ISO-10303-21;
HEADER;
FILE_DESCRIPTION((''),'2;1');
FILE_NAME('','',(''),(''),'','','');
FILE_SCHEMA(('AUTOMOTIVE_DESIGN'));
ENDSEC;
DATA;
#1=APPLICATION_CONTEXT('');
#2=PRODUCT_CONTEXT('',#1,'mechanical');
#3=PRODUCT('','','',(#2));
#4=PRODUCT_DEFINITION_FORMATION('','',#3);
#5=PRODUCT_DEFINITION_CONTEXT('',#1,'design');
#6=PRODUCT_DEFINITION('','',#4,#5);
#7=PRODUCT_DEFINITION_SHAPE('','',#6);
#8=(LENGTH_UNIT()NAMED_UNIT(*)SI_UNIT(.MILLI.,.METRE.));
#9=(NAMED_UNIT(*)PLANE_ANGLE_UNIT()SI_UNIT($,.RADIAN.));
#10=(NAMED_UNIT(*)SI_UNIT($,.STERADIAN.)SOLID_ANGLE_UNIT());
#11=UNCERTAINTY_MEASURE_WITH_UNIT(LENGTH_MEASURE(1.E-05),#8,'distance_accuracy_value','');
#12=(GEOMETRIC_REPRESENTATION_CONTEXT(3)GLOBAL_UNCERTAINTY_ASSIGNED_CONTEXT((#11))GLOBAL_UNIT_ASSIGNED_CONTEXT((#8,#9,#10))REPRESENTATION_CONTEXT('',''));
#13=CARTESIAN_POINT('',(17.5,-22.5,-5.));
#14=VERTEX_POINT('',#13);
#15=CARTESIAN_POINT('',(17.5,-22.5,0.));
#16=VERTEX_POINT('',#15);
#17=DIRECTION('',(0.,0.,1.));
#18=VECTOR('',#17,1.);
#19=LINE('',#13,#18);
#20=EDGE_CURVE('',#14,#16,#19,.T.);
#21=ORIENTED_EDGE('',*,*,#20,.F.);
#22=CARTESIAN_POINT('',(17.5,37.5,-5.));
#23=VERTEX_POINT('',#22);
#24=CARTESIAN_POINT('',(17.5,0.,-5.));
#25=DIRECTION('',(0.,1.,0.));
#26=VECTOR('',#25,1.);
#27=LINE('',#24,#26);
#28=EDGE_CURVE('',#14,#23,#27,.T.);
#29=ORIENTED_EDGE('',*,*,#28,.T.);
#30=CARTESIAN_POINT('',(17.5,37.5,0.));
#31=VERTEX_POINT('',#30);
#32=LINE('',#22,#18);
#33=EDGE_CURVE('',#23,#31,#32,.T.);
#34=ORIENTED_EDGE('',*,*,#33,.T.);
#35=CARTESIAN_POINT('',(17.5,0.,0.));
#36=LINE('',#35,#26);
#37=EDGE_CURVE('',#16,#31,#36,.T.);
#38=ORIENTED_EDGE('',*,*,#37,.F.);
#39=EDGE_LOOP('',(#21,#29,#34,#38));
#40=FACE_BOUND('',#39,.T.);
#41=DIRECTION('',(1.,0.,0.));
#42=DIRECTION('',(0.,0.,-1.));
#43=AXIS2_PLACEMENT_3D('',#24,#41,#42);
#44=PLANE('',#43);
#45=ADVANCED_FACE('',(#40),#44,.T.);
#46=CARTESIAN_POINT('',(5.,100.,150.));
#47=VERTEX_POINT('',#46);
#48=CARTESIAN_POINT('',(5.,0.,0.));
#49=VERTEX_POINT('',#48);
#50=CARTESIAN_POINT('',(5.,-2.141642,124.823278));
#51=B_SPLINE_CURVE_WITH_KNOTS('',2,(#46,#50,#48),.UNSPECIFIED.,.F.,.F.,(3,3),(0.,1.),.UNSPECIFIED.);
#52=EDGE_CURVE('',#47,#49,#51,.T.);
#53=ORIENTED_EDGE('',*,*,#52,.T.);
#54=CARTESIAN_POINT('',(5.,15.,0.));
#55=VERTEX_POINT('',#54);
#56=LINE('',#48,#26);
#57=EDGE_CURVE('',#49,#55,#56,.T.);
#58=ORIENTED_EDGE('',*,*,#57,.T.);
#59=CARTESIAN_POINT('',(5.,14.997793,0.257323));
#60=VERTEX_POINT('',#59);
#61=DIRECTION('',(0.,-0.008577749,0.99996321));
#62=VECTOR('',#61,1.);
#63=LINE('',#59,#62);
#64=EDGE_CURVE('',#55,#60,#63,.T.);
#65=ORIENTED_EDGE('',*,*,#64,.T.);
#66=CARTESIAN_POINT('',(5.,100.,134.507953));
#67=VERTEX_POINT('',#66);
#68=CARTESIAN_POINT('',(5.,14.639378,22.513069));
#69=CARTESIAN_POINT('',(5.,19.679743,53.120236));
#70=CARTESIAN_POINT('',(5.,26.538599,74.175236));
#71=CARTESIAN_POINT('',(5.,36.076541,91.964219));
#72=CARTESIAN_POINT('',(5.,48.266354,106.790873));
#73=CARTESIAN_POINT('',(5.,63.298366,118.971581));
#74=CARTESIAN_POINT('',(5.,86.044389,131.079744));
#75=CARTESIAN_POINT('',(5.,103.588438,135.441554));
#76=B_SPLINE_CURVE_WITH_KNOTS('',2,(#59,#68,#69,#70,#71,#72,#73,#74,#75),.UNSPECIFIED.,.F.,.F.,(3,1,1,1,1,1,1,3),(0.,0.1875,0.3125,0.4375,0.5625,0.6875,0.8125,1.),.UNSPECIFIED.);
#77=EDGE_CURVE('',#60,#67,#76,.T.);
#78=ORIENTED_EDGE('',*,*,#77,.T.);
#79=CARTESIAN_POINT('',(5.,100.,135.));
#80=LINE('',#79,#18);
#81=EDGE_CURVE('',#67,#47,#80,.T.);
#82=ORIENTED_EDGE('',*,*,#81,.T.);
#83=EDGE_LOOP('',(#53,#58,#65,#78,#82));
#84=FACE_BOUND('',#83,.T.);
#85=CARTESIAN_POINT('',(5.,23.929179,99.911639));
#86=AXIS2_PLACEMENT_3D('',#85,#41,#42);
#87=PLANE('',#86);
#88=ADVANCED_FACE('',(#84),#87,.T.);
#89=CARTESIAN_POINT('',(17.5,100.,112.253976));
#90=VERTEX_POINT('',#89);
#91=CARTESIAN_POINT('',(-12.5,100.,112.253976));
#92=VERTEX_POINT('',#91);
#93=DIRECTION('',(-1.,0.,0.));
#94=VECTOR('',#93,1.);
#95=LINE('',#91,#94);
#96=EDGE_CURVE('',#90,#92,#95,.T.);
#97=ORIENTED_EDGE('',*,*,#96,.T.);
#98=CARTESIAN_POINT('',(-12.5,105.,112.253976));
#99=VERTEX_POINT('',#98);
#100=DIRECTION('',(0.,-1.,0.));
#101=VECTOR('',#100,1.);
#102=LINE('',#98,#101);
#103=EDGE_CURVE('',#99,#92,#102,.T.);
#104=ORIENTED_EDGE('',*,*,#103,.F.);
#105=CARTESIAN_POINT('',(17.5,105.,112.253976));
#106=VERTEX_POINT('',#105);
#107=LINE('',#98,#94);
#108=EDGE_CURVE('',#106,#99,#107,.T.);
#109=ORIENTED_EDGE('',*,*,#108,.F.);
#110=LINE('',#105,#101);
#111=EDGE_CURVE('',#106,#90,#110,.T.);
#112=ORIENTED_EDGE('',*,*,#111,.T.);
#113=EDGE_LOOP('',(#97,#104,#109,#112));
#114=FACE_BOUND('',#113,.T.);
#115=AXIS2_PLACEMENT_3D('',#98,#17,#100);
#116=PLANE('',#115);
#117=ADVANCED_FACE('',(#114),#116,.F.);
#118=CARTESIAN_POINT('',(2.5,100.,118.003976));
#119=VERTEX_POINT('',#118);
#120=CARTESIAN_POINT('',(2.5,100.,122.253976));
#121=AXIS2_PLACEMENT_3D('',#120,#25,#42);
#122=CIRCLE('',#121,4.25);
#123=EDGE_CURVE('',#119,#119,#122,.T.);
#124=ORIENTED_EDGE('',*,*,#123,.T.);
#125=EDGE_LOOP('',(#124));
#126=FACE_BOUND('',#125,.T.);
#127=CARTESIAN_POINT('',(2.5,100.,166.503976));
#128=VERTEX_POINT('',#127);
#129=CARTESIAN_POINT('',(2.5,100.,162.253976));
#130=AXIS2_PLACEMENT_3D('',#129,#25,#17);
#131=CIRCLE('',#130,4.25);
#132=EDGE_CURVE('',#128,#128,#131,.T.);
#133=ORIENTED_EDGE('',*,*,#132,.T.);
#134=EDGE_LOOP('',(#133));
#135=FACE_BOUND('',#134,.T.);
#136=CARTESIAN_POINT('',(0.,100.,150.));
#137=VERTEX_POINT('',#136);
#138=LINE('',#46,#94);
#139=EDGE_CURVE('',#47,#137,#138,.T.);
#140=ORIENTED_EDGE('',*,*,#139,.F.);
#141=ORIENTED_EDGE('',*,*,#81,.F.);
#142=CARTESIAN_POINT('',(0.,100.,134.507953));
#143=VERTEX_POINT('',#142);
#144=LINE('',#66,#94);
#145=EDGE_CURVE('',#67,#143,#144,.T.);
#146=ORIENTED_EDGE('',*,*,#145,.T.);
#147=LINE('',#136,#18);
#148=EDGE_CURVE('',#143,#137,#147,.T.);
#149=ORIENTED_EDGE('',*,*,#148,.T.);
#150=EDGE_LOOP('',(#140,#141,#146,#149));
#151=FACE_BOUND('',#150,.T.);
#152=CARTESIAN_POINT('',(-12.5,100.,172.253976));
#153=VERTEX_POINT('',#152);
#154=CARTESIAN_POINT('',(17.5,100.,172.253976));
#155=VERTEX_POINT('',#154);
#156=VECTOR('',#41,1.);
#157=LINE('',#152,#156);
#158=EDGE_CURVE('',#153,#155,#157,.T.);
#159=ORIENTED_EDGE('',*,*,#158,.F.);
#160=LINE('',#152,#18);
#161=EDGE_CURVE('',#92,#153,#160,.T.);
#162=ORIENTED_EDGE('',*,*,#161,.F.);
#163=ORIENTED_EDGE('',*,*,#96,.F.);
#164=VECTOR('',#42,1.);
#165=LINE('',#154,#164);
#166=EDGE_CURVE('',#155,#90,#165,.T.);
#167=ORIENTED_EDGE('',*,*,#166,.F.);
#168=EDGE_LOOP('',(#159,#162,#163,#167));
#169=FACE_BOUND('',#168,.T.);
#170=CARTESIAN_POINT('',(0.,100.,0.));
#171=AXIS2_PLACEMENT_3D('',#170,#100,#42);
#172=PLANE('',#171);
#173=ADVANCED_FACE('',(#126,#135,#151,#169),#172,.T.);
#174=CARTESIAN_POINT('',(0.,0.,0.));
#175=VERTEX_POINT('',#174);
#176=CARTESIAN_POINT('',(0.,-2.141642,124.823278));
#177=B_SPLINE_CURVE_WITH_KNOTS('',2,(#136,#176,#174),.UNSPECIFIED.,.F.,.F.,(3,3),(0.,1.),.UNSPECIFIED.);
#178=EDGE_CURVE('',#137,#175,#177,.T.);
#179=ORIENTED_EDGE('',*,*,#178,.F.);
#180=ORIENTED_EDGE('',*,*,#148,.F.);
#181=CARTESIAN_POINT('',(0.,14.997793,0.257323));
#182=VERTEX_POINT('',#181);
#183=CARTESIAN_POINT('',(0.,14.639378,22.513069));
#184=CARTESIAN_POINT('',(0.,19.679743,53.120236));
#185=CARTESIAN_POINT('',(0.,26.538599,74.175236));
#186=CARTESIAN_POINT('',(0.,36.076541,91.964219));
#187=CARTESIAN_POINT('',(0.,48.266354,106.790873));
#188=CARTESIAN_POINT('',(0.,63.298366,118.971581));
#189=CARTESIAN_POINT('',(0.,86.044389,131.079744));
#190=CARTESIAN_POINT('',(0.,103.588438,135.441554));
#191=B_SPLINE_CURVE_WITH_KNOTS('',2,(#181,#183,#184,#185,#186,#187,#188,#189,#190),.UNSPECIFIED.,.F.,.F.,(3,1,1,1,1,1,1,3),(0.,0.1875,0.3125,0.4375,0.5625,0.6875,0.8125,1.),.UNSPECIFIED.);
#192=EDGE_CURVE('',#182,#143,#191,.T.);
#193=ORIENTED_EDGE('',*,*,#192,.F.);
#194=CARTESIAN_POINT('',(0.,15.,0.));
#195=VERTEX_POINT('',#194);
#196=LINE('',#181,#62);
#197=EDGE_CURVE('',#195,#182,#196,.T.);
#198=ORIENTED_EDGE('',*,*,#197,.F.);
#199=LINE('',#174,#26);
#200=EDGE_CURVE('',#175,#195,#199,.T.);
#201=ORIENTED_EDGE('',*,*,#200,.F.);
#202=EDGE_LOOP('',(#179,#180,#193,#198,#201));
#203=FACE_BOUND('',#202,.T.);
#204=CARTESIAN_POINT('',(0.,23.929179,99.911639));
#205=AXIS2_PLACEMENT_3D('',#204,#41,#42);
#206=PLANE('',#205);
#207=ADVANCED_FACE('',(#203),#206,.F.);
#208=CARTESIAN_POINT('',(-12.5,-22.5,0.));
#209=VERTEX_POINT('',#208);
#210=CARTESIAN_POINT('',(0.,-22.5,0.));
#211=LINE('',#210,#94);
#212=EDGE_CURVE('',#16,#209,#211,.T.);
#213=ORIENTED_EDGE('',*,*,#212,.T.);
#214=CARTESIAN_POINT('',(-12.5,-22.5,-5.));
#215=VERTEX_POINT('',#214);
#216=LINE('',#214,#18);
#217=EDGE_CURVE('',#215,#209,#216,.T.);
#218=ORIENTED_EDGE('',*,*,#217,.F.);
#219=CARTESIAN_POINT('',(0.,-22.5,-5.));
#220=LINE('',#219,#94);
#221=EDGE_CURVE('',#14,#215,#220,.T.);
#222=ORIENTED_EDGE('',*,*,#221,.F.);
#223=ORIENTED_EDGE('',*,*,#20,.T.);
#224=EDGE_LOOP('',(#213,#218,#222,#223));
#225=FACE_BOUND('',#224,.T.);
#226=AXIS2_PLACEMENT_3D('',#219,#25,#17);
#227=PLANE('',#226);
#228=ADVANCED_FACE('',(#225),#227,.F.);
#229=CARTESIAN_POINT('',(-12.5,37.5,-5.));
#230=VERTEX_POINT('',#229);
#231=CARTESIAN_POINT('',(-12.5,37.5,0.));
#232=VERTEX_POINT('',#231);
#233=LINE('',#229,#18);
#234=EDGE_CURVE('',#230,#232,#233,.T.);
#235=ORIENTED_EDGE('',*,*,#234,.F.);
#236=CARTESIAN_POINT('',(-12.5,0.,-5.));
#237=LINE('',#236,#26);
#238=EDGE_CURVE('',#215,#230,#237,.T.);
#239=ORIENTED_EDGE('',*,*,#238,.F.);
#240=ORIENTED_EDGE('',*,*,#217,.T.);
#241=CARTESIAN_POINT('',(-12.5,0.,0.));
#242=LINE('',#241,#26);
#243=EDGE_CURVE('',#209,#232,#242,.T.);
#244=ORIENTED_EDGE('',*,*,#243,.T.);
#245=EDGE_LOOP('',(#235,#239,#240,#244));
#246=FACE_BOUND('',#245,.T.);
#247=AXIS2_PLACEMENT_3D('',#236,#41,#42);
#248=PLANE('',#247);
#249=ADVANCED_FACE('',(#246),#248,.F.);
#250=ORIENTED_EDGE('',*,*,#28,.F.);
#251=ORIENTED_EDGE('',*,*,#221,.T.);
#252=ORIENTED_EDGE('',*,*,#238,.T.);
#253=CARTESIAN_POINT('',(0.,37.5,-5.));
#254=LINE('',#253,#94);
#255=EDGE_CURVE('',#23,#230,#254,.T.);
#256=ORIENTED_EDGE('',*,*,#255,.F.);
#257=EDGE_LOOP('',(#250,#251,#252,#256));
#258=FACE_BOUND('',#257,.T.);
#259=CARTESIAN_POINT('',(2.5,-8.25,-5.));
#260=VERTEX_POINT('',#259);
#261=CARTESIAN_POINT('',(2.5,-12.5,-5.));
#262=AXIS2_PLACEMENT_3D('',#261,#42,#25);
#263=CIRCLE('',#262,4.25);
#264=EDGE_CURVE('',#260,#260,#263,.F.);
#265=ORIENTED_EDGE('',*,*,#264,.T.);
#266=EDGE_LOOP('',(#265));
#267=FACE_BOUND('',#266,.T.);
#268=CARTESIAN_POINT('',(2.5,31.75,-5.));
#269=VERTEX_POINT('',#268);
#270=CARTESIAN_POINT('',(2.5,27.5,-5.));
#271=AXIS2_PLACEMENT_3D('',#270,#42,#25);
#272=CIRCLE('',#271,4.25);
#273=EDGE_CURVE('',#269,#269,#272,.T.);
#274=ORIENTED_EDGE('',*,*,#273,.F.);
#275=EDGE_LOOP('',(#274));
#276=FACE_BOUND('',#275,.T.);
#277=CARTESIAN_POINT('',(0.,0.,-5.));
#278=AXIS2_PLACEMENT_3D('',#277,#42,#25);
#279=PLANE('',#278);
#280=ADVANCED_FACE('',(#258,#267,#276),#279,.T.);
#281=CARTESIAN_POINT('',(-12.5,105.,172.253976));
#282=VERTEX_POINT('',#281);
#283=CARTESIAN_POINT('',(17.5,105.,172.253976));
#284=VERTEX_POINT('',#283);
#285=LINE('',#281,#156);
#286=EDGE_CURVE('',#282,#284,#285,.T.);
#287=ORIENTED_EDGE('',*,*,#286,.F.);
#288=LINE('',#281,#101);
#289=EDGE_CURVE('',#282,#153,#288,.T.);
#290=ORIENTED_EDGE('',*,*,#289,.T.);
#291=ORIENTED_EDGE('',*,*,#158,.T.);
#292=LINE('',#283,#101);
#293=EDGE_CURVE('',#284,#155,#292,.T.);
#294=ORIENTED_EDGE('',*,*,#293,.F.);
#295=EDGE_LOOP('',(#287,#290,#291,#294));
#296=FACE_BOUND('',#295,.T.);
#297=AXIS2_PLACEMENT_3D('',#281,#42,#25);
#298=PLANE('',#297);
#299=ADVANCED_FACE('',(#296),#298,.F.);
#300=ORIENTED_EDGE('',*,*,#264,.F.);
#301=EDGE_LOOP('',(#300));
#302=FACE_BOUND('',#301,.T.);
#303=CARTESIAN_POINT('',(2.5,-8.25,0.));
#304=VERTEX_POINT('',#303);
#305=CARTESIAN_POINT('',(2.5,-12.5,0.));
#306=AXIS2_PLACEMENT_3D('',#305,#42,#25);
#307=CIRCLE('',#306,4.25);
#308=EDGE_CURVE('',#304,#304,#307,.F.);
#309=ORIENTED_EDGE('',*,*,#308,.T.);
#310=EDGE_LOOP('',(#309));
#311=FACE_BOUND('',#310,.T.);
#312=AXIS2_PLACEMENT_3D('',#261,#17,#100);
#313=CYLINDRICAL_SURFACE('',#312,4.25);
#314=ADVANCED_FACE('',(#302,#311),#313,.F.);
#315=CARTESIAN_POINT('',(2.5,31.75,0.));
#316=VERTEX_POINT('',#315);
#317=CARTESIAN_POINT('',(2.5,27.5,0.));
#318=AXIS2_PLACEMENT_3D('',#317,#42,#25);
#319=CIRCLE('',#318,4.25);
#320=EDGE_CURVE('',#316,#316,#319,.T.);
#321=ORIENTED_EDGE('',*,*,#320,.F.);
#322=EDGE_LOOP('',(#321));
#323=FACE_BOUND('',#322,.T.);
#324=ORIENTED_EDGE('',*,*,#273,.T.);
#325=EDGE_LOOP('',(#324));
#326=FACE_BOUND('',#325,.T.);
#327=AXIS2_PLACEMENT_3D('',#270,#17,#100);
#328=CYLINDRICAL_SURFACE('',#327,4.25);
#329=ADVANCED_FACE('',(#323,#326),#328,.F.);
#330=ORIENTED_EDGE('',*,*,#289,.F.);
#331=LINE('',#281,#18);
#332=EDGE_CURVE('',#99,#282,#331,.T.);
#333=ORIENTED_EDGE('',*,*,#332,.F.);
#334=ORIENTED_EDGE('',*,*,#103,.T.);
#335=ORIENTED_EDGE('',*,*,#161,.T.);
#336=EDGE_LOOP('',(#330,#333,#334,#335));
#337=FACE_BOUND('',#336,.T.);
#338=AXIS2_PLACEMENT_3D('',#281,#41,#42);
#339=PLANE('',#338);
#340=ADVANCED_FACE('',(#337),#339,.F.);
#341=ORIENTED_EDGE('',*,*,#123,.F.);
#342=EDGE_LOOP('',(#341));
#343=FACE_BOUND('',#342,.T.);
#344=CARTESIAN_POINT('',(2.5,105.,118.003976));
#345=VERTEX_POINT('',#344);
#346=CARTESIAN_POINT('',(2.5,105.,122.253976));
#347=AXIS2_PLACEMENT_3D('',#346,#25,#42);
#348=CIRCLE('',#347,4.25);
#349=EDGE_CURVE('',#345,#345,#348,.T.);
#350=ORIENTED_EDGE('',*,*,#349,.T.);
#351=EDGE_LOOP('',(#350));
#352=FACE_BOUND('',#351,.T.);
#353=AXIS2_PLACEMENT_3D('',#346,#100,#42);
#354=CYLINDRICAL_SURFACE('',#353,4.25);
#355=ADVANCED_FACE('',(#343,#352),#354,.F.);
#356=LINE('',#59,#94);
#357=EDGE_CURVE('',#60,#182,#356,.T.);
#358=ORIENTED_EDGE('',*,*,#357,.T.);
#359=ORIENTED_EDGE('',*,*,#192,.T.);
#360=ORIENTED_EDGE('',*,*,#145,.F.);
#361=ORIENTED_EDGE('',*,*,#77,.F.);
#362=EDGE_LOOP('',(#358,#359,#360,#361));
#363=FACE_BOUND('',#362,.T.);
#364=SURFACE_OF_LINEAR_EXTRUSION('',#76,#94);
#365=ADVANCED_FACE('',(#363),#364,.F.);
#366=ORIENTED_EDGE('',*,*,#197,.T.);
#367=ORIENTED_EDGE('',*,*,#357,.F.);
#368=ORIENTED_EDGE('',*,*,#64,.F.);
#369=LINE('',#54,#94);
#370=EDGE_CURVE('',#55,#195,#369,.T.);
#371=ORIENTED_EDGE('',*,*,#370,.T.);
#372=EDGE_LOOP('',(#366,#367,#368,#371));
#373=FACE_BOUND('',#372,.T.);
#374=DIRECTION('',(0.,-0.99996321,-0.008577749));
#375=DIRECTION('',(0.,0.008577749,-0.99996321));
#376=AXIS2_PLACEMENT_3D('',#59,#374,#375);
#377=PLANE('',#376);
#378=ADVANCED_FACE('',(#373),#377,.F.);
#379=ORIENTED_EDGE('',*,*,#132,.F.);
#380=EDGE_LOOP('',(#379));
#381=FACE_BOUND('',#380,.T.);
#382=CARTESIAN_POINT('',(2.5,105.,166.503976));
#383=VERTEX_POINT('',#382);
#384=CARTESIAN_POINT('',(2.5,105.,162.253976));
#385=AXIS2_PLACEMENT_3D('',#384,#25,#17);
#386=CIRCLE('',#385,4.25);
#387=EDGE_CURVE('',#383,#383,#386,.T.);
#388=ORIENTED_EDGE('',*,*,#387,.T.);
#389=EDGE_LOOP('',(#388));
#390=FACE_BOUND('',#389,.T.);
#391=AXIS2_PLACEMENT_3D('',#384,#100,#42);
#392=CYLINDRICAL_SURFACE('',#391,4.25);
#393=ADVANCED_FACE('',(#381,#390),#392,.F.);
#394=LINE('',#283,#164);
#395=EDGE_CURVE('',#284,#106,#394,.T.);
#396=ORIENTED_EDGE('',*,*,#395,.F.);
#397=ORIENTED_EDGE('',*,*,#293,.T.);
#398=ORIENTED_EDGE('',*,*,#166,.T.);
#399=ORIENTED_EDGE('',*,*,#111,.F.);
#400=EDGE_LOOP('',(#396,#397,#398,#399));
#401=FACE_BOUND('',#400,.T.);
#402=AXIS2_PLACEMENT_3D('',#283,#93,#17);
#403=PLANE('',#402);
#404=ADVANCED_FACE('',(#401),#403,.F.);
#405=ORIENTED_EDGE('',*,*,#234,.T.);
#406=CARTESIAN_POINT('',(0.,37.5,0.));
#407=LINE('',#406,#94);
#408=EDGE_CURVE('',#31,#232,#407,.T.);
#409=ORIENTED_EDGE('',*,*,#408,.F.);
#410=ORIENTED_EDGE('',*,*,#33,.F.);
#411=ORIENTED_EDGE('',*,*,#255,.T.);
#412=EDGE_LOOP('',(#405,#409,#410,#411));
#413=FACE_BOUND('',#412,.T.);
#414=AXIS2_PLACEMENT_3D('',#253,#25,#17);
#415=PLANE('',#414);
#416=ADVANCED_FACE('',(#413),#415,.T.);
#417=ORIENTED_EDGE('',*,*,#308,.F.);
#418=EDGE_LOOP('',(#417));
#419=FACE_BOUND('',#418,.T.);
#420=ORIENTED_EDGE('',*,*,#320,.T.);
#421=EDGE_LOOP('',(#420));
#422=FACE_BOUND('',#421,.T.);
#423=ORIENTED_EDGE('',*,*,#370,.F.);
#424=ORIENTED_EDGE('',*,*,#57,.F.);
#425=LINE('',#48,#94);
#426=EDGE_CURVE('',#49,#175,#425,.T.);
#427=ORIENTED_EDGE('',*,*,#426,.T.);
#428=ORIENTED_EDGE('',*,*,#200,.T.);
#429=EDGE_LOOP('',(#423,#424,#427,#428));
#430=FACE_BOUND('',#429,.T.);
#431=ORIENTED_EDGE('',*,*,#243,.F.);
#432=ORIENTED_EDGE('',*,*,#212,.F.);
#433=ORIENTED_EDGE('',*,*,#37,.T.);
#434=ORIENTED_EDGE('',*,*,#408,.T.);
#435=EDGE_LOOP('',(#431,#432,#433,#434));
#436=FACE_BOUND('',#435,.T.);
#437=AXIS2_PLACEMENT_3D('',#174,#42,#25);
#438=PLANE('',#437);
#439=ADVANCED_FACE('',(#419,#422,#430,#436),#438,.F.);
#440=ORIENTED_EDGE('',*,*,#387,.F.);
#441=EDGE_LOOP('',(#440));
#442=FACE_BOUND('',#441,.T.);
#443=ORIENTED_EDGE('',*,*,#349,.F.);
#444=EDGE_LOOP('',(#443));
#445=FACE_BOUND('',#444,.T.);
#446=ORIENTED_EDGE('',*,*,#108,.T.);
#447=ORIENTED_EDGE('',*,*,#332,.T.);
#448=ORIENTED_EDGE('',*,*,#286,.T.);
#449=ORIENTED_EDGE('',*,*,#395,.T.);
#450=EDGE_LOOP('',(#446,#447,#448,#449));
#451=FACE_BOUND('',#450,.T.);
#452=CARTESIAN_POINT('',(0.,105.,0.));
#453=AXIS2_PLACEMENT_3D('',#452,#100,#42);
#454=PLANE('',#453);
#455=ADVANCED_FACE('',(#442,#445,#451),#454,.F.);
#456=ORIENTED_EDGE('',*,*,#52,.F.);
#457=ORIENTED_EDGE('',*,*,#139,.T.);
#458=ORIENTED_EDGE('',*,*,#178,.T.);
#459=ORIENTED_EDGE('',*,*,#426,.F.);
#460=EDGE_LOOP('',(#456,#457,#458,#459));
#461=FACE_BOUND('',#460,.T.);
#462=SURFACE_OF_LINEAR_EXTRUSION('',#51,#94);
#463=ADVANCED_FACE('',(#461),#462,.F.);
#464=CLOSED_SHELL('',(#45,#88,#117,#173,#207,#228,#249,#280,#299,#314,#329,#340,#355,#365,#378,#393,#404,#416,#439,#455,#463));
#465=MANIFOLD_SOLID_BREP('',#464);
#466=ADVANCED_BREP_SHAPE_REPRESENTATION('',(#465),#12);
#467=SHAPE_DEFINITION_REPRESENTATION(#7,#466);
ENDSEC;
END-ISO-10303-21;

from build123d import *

# Parameters (mm, degrees)
BOSS_EXTRUDE3_DEPTH = 5
SKETCH5_W           = 30
SKETCH5_H           = 60
SKETCH5_R           = 4.25
BOSS_EXTRUDE7_DEPTH = 5
SKETCH6_W           = 30
SKETCH6_H           = 60
SKETCH6_R           = 4.25
BOSS_EXTRUDE8_DEPTH = 5


# Read off the part's stored shape, not the designer's step: Boss-Extrude3
with BuildPart() as part:
    # Boss-Extrude3 outline → Boss-Extrude3 (new body)
    with BuildSketch(Plane(origin=(0, 0, 0), x_dir=(0, 0, -1), z_dir=(1, 0, 0))):
        with BuildLine():
            Line((-134.507952774, 100), (-150, 100))
            add(Edge.make_bspline(
                [(-150, 100), (-124.823277558, -2.14164181), (0, 0)],
                knots=[0, 0, 0, 1, 1, 1], degree=2))
            Line((0, 0), (0, 15))
            Line((0, 15), (-0.257322997, 14.997792667))
            add(Edge.make_bspline(
                [(-0.257322997, 14.997792667), (-22.513069097, 14.639377531), (-53.120235991, 19.679743273), (-74.17523554, 26.538598941), (-91.96421888, 36.076540514), (-106.790873123, 48.266354422), (-118.971580699, 63.298366178), (-130.328132656, 84.632434891), (-134.507952774, 100)],
                knots=[0, 0, 0, 0.1875, 0.3125, 0.4375, 0.5625, 0.6875, 0.8125, 0.98060163, 0.98060163, 0.98060163], degree=2))
        make_face()
    extrude(amount=BOSS_EXTRUDE3_DEPTH)

    # Sketch5 → Boss-Extrude7 (add)
    with BuildSketch(Plane(origin=(0, 100, 0), x_dir=(1, 0, 0), z_dir=(0, 1, 0))):
        with Locations((2.5, -142.253976387)):
            Rectangle(SKETCH5_W, SKETCH5_H)
        with Locations(Location((2.5, -162.253976387, 0), (0, 0, 270))):
            Circle(SKETCH5_R, mode=Mode.SUBTRACT)
        with Locations(Location((2.5, -122.253976387, 0), (0, 0, 90))):
            Circle(SKETCH5_R, mode=Mode.SUBTRACT)
    extrude(amount=BOSS_EXTRUDE7_DEPTH)

    # Sketch6 → Boss-Extrude8 (add)
    with BuildSketch(Plane(origin=(0, 0, 0), x_dir=(-1, 0, 0), z_dir=(0, 0, -1))):
        with Locations((-2.5, 7.5)):
            Rectangle(SKETCH6_W, SKETCH6_H)
        with Locations(Location((-2.5, 27.5, 0), (0, 0, 90))):
            Circle(SKETCH6_R, mode=Mode.SUBTRACT)
        with Locations(Location((-2.5, -12.5, 0), (0, 0, 90))):
            Circle(SKETCH6_R, mode=Mode.SUBTRACT)
    extrude(amount=BOSS_EXTRUDE8_DEPTH)


solid = part.part
